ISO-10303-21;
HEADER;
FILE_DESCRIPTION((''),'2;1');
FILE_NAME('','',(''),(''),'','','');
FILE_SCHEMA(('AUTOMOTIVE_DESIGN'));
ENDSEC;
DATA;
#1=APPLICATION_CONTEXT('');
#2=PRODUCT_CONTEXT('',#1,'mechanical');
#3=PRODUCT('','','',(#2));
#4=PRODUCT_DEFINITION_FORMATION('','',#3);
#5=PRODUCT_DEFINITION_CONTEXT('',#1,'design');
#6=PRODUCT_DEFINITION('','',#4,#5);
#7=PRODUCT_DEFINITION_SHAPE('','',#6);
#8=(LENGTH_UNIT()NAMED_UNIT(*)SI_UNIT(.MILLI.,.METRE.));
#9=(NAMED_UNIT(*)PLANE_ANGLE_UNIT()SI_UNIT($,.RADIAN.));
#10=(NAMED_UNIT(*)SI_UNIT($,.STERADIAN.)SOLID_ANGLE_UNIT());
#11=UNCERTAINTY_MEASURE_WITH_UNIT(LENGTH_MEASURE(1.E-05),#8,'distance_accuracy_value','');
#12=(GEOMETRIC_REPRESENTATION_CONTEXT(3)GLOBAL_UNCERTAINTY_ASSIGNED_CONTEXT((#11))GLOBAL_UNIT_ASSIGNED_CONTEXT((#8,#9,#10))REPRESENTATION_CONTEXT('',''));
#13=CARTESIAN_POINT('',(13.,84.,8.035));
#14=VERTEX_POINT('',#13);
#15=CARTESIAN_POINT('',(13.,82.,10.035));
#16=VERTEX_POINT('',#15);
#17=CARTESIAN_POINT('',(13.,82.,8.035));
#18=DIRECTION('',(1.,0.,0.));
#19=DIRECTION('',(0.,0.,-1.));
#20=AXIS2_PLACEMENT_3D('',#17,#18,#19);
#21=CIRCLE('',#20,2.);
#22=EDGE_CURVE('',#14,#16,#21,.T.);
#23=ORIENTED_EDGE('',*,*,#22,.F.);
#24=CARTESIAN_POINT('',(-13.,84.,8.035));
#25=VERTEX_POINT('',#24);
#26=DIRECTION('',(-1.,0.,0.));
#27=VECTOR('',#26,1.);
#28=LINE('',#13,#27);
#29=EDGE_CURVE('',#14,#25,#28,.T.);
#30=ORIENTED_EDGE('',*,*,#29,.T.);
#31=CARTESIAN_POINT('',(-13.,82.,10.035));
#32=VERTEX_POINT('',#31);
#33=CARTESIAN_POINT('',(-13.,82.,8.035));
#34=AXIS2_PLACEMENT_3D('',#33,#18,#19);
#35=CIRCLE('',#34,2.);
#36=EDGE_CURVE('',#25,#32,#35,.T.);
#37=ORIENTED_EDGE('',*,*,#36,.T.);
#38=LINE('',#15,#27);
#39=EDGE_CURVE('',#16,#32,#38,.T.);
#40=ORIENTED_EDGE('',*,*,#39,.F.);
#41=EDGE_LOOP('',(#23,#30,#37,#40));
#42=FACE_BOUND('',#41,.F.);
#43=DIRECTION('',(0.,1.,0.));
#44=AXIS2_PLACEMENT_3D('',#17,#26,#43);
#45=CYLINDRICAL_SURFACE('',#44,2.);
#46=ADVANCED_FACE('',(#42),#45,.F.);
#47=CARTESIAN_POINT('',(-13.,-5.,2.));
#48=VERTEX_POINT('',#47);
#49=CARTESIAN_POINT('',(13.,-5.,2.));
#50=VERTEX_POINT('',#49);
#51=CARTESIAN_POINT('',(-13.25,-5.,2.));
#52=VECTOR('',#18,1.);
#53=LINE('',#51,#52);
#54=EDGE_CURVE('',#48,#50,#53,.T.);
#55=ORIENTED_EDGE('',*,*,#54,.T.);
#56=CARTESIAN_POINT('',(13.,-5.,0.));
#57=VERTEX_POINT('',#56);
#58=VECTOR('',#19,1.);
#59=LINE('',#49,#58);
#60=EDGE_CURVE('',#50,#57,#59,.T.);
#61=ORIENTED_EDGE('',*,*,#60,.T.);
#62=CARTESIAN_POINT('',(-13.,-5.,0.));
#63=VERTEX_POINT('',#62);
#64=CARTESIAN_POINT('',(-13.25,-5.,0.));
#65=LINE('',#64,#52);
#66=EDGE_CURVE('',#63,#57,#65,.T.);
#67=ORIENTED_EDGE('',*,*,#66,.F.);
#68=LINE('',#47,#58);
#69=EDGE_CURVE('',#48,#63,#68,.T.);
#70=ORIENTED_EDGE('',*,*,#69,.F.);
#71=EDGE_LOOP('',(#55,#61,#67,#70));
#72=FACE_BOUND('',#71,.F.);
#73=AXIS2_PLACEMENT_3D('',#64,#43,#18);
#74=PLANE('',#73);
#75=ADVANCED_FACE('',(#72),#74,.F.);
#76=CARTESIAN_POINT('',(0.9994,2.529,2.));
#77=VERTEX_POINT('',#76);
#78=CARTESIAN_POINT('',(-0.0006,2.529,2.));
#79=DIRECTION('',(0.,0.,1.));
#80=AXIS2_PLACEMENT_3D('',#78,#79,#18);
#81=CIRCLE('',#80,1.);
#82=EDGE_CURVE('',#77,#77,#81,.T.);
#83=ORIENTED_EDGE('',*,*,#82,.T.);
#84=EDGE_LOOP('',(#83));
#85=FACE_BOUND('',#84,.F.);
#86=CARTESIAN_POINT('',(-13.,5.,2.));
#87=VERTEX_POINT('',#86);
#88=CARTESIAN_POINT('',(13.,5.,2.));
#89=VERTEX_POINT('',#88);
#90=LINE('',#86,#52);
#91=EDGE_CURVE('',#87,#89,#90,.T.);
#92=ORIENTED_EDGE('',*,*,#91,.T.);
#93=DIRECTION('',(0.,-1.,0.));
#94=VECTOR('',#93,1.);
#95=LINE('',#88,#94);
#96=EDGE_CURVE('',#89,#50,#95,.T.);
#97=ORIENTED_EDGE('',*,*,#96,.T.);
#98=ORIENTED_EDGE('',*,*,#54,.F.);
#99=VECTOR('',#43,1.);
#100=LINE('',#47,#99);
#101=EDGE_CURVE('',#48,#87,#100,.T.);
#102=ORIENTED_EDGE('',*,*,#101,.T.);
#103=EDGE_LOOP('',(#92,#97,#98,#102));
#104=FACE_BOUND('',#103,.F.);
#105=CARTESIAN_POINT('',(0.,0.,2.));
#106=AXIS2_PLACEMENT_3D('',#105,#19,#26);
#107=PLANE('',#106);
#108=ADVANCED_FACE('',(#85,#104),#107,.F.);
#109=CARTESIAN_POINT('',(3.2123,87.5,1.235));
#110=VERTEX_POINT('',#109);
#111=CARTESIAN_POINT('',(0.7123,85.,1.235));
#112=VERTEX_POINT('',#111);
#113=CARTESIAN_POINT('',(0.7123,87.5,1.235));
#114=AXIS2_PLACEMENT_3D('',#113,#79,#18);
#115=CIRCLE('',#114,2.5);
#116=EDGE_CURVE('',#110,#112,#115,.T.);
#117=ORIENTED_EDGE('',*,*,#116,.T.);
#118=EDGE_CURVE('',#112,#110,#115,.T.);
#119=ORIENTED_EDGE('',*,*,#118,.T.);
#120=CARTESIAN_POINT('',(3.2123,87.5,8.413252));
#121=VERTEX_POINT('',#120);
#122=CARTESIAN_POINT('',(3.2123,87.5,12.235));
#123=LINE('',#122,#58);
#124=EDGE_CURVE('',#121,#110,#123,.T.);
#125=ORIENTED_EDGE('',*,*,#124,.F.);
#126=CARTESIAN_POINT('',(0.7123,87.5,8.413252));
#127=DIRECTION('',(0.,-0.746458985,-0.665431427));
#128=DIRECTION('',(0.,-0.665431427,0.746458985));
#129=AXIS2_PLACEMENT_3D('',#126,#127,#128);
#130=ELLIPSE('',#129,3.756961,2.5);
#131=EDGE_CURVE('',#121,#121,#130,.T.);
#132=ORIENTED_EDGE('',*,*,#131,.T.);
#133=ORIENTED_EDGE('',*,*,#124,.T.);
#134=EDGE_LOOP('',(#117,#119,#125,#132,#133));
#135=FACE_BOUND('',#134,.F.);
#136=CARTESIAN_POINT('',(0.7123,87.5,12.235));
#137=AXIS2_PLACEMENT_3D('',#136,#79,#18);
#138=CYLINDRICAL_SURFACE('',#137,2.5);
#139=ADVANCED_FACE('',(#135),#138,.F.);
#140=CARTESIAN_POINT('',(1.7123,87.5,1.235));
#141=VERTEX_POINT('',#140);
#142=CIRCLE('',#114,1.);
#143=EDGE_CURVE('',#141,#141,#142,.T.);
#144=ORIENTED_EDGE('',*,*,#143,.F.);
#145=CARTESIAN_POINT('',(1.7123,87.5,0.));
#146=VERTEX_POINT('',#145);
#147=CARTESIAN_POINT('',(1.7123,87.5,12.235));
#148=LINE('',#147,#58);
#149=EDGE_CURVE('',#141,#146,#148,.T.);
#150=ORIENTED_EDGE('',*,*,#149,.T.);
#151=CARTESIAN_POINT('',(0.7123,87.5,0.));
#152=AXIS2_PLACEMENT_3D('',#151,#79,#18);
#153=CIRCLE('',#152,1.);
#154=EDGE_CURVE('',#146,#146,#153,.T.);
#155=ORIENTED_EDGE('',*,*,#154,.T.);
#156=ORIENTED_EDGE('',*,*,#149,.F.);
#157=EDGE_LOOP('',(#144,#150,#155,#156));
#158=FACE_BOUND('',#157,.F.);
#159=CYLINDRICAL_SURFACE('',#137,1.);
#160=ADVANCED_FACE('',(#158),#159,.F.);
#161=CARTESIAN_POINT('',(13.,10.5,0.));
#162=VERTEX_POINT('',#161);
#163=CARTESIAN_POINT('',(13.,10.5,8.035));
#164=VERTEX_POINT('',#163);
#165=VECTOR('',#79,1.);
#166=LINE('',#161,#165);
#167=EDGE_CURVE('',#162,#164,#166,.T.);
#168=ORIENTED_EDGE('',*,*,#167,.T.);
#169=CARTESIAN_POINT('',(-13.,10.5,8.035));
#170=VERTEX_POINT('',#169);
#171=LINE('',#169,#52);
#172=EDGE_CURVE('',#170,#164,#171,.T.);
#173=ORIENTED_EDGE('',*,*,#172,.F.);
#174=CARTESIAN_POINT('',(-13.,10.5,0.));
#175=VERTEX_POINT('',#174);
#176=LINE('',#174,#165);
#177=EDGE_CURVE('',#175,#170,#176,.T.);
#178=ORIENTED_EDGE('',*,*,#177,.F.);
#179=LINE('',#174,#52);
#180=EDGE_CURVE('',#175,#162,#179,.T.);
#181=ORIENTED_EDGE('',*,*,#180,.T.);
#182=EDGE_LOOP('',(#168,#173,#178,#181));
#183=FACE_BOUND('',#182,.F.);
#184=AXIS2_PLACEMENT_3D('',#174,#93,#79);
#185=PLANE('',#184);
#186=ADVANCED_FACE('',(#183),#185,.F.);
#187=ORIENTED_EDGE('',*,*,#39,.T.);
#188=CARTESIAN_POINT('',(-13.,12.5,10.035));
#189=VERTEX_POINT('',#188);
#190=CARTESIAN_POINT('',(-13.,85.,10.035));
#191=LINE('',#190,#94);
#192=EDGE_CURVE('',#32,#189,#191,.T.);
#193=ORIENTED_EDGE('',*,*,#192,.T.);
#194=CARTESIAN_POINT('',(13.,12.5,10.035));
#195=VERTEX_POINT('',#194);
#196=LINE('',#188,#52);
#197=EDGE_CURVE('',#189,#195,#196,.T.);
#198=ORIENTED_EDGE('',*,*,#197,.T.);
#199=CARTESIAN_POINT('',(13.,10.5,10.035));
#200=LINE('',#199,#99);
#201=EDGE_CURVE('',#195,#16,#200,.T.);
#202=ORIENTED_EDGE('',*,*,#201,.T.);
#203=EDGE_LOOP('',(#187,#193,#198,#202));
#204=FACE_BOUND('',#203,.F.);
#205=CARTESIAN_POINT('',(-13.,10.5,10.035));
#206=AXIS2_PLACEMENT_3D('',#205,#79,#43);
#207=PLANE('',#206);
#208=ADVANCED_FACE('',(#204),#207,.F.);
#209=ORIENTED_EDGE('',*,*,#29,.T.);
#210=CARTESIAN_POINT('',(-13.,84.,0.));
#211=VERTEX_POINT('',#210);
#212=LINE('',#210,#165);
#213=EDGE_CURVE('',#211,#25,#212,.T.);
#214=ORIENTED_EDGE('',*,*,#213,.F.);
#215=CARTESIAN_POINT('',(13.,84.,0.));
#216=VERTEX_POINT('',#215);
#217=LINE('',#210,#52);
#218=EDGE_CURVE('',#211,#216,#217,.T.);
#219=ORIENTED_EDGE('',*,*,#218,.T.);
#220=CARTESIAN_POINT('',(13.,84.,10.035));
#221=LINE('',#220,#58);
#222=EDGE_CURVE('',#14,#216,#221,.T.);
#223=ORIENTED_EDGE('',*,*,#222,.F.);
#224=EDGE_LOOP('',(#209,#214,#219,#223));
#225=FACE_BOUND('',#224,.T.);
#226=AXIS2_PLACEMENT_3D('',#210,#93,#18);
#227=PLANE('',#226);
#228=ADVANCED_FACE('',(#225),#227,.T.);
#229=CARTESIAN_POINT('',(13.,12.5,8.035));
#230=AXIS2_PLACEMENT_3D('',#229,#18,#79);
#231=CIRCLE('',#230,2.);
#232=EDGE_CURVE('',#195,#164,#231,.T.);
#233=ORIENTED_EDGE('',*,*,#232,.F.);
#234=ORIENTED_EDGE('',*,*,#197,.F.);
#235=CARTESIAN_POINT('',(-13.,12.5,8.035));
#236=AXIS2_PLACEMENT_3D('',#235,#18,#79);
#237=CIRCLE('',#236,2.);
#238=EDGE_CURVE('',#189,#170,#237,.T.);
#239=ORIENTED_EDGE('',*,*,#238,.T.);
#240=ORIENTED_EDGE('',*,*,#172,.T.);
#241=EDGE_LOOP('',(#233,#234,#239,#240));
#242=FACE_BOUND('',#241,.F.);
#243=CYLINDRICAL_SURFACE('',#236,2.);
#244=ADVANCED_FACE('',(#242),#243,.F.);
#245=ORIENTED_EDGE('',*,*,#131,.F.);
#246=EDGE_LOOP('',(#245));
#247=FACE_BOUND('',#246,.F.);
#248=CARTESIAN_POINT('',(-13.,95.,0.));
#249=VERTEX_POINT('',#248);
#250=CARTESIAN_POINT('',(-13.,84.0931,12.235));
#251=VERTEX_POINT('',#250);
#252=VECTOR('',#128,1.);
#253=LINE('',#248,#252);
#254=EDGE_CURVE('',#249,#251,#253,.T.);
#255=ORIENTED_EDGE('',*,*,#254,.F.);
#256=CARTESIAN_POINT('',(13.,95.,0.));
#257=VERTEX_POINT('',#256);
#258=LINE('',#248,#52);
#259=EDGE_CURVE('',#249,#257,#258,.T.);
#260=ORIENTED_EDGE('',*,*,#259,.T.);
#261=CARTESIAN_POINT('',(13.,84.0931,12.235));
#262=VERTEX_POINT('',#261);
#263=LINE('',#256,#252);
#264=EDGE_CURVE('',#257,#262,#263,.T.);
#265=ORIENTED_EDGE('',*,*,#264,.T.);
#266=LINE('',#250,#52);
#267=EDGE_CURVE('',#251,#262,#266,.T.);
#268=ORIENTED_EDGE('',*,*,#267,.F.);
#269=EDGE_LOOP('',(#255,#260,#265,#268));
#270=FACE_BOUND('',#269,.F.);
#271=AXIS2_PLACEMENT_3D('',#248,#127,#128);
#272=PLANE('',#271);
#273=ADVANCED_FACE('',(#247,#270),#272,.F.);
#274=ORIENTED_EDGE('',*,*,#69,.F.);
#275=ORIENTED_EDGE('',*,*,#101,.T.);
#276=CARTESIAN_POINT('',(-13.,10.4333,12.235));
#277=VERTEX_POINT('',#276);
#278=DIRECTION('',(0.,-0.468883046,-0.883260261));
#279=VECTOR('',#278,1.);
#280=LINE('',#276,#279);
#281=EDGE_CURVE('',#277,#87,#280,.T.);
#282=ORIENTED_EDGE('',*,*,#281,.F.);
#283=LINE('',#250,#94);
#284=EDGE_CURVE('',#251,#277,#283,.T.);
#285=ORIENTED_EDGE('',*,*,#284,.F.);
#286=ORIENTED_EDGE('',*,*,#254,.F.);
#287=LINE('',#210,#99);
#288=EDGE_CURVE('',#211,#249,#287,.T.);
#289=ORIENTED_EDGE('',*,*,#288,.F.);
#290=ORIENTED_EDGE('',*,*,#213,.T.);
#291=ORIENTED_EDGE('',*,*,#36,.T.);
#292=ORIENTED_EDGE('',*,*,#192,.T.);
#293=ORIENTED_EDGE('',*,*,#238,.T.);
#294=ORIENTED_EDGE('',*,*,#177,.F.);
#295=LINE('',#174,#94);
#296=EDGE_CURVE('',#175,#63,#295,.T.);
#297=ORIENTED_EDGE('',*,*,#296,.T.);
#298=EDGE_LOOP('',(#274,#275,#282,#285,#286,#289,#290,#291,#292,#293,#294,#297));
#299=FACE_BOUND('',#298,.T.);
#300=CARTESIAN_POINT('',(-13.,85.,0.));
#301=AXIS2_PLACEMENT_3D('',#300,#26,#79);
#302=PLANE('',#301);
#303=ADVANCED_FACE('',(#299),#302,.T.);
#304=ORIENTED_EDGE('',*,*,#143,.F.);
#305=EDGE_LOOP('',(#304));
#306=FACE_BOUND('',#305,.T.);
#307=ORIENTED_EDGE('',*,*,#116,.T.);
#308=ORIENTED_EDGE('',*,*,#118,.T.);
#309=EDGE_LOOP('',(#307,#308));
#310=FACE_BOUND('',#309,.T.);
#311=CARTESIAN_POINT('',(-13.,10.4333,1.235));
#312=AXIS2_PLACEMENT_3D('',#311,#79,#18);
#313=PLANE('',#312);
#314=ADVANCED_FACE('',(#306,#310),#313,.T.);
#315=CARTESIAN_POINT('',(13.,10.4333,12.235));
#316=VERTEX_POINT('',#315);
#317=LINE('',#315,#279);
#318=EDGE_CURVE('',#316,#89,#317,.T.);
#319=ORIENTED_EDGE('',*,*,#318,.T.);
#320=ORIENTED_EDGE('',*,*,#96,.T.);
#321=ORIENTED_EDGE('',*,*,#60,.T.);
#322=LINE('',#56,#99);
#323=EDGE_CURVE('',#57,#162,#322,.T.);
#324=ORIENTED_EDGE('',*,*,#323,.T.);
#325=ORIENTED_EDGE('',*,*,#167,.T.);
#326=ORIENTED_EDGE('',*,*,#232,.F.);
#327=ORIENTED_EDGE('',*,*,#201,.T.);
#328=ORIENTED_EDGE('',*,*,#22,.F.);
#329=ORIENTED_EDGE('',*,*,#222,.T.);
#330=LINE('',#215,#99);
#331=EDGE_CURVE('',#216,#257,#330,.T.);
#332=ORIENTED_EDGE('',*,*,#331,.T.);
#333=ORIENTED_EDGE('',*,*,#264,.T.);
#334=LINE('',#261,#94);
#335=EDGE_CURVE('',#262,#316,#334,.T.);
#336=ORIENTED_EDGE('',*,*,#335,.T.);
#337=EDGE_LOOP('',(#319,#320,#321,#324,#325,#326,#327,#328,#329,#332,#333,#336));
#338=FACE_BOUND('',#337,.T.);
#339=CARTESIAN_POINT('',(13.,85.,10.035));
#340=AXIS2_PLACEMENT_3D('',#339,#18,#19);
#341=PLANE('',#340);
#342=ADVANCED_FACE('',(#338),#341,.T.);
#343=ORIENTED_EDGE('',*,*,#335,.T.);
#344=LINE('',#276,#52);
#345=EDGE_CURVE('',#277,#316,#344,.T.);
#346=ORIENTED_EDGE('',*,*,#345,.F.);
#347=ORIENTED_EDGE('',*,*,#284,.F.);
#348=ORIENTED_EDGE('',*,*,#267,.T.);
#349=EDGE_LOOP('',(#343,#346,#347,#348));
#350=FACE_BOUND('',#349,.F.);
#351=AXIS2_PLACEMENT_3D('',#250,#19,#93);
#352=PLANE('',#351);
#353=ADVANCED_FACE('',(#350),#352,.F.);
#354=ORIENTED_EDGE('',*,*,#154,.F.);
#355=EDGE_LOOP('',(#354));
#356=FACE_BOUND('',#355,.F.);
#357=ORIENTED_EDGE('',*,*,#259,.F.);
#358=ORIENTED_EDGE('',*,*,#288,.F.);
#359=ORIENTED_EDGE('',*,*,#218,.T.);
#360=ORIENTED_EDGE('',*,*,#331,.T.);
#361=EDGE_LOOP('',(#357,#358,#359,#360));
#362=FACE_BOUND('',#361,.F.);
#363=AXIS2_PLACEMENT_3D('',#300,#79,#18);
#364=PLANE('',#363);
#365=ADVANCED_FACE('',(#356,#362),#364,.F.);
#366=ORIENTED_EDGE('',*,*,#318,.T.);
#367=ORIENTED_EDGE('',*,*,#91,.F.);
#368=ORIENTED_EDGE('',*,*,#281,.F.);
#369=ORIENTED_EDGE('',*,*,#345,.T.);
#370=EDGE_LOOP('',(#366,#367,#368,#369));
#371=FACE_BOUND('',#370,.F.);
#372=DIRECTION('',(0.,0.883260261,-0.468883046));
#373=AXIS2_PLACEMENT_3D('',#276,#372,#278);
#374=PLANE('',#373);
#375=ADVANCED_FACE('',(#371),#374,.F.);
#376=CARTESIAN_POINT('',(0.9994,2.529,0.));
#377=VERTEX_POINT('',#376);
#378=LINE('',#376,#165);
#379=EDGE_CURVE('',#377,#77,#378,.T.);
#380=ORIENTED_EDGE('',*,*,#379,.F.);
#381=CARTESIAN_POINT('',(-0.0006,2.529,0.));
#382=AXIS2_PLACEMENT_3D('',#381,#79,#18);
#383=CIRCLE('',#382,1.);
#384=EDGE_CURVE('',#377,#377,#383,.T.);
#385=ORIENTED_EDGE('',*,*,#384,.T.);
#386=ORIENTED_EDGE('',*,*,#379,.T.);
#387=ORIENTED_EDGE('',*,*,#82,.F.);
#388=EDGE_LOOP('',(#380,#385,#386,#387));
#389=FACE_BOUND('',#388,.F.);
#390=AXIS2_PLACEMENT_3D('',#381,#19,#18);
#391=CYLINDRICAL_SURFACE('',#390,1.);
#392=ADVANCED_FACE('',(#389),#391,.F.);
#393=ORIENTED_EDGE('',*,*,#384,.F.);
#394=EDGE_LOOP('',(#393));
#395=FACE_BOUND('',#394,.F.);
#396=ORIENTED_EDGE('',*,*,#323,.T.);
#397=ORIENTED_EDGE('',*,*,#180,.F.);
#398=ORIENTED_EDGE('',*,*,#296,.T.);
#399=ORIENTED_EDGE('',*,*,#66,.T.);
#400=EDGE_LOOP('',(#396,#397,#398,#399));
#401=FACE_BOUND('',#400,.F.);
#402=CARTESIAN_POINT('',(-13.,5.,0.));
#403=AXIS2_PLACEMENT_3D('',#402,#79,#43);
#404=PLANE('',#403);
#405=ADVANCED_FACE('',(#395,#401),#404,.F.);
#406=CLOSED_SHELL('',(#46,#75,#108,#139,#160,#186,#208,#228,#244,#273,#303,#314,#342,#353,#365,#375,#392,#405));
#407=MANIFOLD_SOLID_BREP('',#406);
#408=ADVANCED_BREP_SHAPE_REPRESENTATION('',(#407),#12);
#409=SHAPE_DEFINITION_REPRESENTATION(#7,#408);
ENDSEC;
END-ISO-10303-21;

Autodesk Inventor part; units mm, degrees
ref_plane "YZ Plane" through (0, 0, 0) normal (1, 0, 0) x (0, 1, 0)
ref_plane "XZ Plane" through (0, 0, 0) normal (0, 1, 0) x (-1, 0, 0)
sketch "スケッチ1" plane through (0, 0, 0) normal (0, 0, 1) x (1, 0, 0)
  ellipse E0 centre (-0.0006, 2.529) end of major axis (-0.0006, 5.5657) minor radius 3.0367 (2.9994, 3) -> (1.7646, 5) ccw projected
  line L0 (1.7646, 5) -> (-1.7658, 5) projected
  ellipse E1 centre (-0.0006, 2.529) end of major axis (-0.0006, 5.5657) minor radius 3.0367 (-1.7658, 5) -> (-3.0006, 3) ccw projected
  arc A0 (-6.0006, 0) -> (-3.0006, 3) centre (-6.0006, 3) ccw projected
  line L1 (-6.0006, 0) -> (-13.25, 0) projected
  line L2 (-13.25, -5) -> (-13.25, 0) projected
  line L3 (-13.25, -5) -> (13.25, -5) projected
  line L4 (13.25, 0) -> (13.25, -5) projected
  line L5 (13.25, 0) -> (5.9994, 0) projected
  ellipse E2 centre (5.9994, 3) end of major axis (8.9994, 3) minor radius 3 (2.9994, 3) -> (5.9994, 0) ccw projected
  circle A1 centre (-0.0006, 2.529) radius 1 projected
  point P0 (0, 0)
ref_plane "作業平面1" through (13.25, -5, 2) normal (0, 0, 1) x (1, 0, 0)
extrude "押し出し1" add sketch "スケッチ1" along normal up to surface (2 mm away)
sketch "スケッチ2" plane through (-13.25, -5, 2) normal (0, 0, 1) x (1, 0, 0)
  circle A0 centre (13.2494, 7.529) radius 1 projected
  line L0 (19.2494, 5) -> (26.5, 5) projected
  ellipse E0 centre (19.2494, 8) end of major axis (16.2494, 8) minor radius 3 (16.2494, 8) -> (19.2494, 5) ccw projected
  ellipse E1 centre (13.2494, 7.529) end of major axis (13.2494, 10.5657) minor radius 3.0367 (16.2494, 8) -> (15.0146, 10) ccw projected
  line L1 (11.4842, 10) -> (15.0146, 10) projected
  ellipse E2 centre (13.2494, 7.529) end of major axis (13.2494, 10.5657) minor radius 3.0367 (11.4842, 10) -> (10.2494, 8) ccw projected
  arc A1 (7.2494, 5) -> (10.2494, 8) centre (7.2494, 8) ccw projected
  line L2 (0, 5) -> (7.2494, 5) projected
  line L3 (0, 0) -> (0, 5) projected
  line L4 (26.5, 0) -> (0, 0) projected
  line L5 (26.5, 5) -> (26.5, 0) projected
  line L6 (26.5, 0) -> (26.25, 0)
  line L7 (26.25, 0) -> (26.25, 5)
  line L8 (26.25, 5) -> (26.5, 5)
  line L9 (26.5, 5) -> (26.5, 0)
  line L10 (0, 0) -> (0.25, 0)
  line L11 (0.25, 0) -> (0.25, 5)
  line L12 (0.25, 5) -> (0, 5)
  line L13 (0, 5) -> (0, 0)
  point P0 (13.25, 5)
  point P1 (0.25, 0)
  point P2 (26.25, 0)
  dimension "d2" = 0.25
  dimension "d3" = 0.25
extrude "押し出し2" cut sketch "スケッチ2" against normal blind 10 contours L0 L5 L4 L7 | L4 L3 L2 L11
ref_plane "作業平面2" through (-13, 0, 2) normal (-1, 0, 0) x (0, -1, 0)
sketch "スケッチ3" plane through (-13, 0, 2) normal (-1, 0, 0) x (0, -1, 0)
  line L0 (-95, -2) -> (-84.0931, 10.235) projected
  line L1 (-84.0931, 10.235) -> (-10.4333, 10.235) projected
  line L2 (-10.4333, 10.235) -> (-5, 0) projected
  line L3 (-5, 0) -> (5, 0) projected
  line L4 (5, 0) -> (5, -3) projected
  line L5 (-95, -3) -> (5, -3) projected
  line L6 (-95, -2) -> (-95, -3) projected
  line L7 (-11, -11.065) -> (-11, 7.535) projected
  line L8 (-11, 7.535) -> (-84.5, 7.535) projected
  line L9 (-5, -2) -> (-5, 0) projected
  line L10 (-5, -2) -> (-10.5, -2)
  line L11 (-10.5, -2) -> (-10.5, 8.035)
  line L12 (-10.5, 8.035) -> (-12.7452, 8.035)
  line L13 (-12.7452, 8.035) -> (-84.6975, 8.035)
  line L14 (-85, -6.5) -> (-85, -5) projected
  line L15 (-85, -2) -> (-85, -5) projected
  line L16 (-85, -2) -> (-85, 8.035)
  line L17 (-85, 8.035) -> (-84.5, 8.035)
  line L18 (-85, -2) -> (-95, -2)
  point P0 (0, -2)
  dimension "d6" = 0.5
  dimension "d7" = 0.5
extrude "押し出し3" add sketch "スケッチ3" against normal up to surface (26 mm away) contours L0 L1 L2 L9 L10 L11 L12 L13 L17 L16 L18
sketch "スケッチ4" plane through (0, 0, 0) normal (0, 0, -1) x (-1, 0, 0)
  circle A0 centre (0.0006, 2.529) radius 1 projected
  line L0 (13, -5) -> (13, 0) projected
  line L1 (6.0006, 0) -> (13, 0) projected
  arc A1 (3.0006, 3) -> (6.0006, 0) centre (6.0006, 3) ccw projected
  ellipse E0 centre (0.0006, 2.529) end of major axis (0.0006, 5.5657) minor radius 3.0367 (3.0006, 3) -> (1.7658, 5) ccw projected
  line L2 (13, 5) -> (1.7658, 5) projected
  line L3 (13, 10.5) -> (13, 5) projected
  line L4 (13, 10.5) -> (-13, 10.5) projected
  line L5 (-13, 5) -> (-13, 10.5) projected
  line L6 (-1.7646, 5) -> (-13, 5) projected
  ellipse E1 centre (0.0006, 2.529) end of major axis (0.0006, 5.5657) minor radius 3.0367 (-1.7646, 5) -> (-2.9994, 3) ccw projected
  ellipse E2 centre (-5.9994, 3) end of major axis (-2.9994, 3) minor radius 3 (-5.9994, 0) -> (-2.9994, 3) ccw projected
  line L7 (-13, 0) -> (-5.9994, 0) projected
  line L8 (-13, 0) -> (-13, -5) projected
  line L9 (13, -5) -> (-13, -5) projected
  line L10 (-13, 0) -> (-13, 5)
  line L11 (13, 5) -> (13, 0)
  point P0 (0, 0)
extrude "押し出し4" add sketch "スケッチ4" against normal up to surface (2 mm away) contours L1 A1 E0 L2 L11 | L10 L6 E1 E2 L7
sketch "スケッチ5" plane through (-13, 10.4333, 12.235) normal (0, 0, 1) x (1, 0, 0)
  circle A0 centre (13.7123, 77.0667) radius 1 projected
  circle A1 centre (13.7123, 77.0667) radius 2.5
  point P0 (13, -10.4333)
  dimension "d12" = 5
extrude "押し出し5" cut sketch "スケッチ5" against normal blind 13 contours A0
sketch "スケッチ6" plane through (-13, 10.4333, 12.235) normal (0, 0, 1) x (1, 0, 0)
  circle A0 centre (13.7123, 77.0667) radius 1 projected
  circle A1 centre (13.7123, 77.0667) radius 2.5
  point P0 (13, -10.4333)
  dimension "d15" = 5
extrude "押し出し6" cut sketch "スケッチ6" against normal blind 11 contours A0 | A1
sketch "スケッチ7" plane through (-13, 85, 0) normal (0, -1, 0) x (1, 0, 0)
  line L0 (26, 10.035) -> (26, 0) projected
  line L1 (13.7123, 10.035) -> (26, 10.035) projected
  line L2 (13.7123, 10.035) -> (13.7123, 1.235) projected
  line L3 (0, 10.035) -> (13.7123, 10.035) projected
  line L4 (0, 0) -> (0, 10.035) projected
  line L5 (0, 0) -> (26, 0) projected
  point P0 (13, 0)
extrude "押し出し7" add sketch "スケッチ7" along normal blind 1
fillet "フィレット1" radius 2 2 edges at (0, 10.5, 10.035) (0, 84, 10.035)
equation "\"d7\" = d6"
properties part number "NNfront-huta"
